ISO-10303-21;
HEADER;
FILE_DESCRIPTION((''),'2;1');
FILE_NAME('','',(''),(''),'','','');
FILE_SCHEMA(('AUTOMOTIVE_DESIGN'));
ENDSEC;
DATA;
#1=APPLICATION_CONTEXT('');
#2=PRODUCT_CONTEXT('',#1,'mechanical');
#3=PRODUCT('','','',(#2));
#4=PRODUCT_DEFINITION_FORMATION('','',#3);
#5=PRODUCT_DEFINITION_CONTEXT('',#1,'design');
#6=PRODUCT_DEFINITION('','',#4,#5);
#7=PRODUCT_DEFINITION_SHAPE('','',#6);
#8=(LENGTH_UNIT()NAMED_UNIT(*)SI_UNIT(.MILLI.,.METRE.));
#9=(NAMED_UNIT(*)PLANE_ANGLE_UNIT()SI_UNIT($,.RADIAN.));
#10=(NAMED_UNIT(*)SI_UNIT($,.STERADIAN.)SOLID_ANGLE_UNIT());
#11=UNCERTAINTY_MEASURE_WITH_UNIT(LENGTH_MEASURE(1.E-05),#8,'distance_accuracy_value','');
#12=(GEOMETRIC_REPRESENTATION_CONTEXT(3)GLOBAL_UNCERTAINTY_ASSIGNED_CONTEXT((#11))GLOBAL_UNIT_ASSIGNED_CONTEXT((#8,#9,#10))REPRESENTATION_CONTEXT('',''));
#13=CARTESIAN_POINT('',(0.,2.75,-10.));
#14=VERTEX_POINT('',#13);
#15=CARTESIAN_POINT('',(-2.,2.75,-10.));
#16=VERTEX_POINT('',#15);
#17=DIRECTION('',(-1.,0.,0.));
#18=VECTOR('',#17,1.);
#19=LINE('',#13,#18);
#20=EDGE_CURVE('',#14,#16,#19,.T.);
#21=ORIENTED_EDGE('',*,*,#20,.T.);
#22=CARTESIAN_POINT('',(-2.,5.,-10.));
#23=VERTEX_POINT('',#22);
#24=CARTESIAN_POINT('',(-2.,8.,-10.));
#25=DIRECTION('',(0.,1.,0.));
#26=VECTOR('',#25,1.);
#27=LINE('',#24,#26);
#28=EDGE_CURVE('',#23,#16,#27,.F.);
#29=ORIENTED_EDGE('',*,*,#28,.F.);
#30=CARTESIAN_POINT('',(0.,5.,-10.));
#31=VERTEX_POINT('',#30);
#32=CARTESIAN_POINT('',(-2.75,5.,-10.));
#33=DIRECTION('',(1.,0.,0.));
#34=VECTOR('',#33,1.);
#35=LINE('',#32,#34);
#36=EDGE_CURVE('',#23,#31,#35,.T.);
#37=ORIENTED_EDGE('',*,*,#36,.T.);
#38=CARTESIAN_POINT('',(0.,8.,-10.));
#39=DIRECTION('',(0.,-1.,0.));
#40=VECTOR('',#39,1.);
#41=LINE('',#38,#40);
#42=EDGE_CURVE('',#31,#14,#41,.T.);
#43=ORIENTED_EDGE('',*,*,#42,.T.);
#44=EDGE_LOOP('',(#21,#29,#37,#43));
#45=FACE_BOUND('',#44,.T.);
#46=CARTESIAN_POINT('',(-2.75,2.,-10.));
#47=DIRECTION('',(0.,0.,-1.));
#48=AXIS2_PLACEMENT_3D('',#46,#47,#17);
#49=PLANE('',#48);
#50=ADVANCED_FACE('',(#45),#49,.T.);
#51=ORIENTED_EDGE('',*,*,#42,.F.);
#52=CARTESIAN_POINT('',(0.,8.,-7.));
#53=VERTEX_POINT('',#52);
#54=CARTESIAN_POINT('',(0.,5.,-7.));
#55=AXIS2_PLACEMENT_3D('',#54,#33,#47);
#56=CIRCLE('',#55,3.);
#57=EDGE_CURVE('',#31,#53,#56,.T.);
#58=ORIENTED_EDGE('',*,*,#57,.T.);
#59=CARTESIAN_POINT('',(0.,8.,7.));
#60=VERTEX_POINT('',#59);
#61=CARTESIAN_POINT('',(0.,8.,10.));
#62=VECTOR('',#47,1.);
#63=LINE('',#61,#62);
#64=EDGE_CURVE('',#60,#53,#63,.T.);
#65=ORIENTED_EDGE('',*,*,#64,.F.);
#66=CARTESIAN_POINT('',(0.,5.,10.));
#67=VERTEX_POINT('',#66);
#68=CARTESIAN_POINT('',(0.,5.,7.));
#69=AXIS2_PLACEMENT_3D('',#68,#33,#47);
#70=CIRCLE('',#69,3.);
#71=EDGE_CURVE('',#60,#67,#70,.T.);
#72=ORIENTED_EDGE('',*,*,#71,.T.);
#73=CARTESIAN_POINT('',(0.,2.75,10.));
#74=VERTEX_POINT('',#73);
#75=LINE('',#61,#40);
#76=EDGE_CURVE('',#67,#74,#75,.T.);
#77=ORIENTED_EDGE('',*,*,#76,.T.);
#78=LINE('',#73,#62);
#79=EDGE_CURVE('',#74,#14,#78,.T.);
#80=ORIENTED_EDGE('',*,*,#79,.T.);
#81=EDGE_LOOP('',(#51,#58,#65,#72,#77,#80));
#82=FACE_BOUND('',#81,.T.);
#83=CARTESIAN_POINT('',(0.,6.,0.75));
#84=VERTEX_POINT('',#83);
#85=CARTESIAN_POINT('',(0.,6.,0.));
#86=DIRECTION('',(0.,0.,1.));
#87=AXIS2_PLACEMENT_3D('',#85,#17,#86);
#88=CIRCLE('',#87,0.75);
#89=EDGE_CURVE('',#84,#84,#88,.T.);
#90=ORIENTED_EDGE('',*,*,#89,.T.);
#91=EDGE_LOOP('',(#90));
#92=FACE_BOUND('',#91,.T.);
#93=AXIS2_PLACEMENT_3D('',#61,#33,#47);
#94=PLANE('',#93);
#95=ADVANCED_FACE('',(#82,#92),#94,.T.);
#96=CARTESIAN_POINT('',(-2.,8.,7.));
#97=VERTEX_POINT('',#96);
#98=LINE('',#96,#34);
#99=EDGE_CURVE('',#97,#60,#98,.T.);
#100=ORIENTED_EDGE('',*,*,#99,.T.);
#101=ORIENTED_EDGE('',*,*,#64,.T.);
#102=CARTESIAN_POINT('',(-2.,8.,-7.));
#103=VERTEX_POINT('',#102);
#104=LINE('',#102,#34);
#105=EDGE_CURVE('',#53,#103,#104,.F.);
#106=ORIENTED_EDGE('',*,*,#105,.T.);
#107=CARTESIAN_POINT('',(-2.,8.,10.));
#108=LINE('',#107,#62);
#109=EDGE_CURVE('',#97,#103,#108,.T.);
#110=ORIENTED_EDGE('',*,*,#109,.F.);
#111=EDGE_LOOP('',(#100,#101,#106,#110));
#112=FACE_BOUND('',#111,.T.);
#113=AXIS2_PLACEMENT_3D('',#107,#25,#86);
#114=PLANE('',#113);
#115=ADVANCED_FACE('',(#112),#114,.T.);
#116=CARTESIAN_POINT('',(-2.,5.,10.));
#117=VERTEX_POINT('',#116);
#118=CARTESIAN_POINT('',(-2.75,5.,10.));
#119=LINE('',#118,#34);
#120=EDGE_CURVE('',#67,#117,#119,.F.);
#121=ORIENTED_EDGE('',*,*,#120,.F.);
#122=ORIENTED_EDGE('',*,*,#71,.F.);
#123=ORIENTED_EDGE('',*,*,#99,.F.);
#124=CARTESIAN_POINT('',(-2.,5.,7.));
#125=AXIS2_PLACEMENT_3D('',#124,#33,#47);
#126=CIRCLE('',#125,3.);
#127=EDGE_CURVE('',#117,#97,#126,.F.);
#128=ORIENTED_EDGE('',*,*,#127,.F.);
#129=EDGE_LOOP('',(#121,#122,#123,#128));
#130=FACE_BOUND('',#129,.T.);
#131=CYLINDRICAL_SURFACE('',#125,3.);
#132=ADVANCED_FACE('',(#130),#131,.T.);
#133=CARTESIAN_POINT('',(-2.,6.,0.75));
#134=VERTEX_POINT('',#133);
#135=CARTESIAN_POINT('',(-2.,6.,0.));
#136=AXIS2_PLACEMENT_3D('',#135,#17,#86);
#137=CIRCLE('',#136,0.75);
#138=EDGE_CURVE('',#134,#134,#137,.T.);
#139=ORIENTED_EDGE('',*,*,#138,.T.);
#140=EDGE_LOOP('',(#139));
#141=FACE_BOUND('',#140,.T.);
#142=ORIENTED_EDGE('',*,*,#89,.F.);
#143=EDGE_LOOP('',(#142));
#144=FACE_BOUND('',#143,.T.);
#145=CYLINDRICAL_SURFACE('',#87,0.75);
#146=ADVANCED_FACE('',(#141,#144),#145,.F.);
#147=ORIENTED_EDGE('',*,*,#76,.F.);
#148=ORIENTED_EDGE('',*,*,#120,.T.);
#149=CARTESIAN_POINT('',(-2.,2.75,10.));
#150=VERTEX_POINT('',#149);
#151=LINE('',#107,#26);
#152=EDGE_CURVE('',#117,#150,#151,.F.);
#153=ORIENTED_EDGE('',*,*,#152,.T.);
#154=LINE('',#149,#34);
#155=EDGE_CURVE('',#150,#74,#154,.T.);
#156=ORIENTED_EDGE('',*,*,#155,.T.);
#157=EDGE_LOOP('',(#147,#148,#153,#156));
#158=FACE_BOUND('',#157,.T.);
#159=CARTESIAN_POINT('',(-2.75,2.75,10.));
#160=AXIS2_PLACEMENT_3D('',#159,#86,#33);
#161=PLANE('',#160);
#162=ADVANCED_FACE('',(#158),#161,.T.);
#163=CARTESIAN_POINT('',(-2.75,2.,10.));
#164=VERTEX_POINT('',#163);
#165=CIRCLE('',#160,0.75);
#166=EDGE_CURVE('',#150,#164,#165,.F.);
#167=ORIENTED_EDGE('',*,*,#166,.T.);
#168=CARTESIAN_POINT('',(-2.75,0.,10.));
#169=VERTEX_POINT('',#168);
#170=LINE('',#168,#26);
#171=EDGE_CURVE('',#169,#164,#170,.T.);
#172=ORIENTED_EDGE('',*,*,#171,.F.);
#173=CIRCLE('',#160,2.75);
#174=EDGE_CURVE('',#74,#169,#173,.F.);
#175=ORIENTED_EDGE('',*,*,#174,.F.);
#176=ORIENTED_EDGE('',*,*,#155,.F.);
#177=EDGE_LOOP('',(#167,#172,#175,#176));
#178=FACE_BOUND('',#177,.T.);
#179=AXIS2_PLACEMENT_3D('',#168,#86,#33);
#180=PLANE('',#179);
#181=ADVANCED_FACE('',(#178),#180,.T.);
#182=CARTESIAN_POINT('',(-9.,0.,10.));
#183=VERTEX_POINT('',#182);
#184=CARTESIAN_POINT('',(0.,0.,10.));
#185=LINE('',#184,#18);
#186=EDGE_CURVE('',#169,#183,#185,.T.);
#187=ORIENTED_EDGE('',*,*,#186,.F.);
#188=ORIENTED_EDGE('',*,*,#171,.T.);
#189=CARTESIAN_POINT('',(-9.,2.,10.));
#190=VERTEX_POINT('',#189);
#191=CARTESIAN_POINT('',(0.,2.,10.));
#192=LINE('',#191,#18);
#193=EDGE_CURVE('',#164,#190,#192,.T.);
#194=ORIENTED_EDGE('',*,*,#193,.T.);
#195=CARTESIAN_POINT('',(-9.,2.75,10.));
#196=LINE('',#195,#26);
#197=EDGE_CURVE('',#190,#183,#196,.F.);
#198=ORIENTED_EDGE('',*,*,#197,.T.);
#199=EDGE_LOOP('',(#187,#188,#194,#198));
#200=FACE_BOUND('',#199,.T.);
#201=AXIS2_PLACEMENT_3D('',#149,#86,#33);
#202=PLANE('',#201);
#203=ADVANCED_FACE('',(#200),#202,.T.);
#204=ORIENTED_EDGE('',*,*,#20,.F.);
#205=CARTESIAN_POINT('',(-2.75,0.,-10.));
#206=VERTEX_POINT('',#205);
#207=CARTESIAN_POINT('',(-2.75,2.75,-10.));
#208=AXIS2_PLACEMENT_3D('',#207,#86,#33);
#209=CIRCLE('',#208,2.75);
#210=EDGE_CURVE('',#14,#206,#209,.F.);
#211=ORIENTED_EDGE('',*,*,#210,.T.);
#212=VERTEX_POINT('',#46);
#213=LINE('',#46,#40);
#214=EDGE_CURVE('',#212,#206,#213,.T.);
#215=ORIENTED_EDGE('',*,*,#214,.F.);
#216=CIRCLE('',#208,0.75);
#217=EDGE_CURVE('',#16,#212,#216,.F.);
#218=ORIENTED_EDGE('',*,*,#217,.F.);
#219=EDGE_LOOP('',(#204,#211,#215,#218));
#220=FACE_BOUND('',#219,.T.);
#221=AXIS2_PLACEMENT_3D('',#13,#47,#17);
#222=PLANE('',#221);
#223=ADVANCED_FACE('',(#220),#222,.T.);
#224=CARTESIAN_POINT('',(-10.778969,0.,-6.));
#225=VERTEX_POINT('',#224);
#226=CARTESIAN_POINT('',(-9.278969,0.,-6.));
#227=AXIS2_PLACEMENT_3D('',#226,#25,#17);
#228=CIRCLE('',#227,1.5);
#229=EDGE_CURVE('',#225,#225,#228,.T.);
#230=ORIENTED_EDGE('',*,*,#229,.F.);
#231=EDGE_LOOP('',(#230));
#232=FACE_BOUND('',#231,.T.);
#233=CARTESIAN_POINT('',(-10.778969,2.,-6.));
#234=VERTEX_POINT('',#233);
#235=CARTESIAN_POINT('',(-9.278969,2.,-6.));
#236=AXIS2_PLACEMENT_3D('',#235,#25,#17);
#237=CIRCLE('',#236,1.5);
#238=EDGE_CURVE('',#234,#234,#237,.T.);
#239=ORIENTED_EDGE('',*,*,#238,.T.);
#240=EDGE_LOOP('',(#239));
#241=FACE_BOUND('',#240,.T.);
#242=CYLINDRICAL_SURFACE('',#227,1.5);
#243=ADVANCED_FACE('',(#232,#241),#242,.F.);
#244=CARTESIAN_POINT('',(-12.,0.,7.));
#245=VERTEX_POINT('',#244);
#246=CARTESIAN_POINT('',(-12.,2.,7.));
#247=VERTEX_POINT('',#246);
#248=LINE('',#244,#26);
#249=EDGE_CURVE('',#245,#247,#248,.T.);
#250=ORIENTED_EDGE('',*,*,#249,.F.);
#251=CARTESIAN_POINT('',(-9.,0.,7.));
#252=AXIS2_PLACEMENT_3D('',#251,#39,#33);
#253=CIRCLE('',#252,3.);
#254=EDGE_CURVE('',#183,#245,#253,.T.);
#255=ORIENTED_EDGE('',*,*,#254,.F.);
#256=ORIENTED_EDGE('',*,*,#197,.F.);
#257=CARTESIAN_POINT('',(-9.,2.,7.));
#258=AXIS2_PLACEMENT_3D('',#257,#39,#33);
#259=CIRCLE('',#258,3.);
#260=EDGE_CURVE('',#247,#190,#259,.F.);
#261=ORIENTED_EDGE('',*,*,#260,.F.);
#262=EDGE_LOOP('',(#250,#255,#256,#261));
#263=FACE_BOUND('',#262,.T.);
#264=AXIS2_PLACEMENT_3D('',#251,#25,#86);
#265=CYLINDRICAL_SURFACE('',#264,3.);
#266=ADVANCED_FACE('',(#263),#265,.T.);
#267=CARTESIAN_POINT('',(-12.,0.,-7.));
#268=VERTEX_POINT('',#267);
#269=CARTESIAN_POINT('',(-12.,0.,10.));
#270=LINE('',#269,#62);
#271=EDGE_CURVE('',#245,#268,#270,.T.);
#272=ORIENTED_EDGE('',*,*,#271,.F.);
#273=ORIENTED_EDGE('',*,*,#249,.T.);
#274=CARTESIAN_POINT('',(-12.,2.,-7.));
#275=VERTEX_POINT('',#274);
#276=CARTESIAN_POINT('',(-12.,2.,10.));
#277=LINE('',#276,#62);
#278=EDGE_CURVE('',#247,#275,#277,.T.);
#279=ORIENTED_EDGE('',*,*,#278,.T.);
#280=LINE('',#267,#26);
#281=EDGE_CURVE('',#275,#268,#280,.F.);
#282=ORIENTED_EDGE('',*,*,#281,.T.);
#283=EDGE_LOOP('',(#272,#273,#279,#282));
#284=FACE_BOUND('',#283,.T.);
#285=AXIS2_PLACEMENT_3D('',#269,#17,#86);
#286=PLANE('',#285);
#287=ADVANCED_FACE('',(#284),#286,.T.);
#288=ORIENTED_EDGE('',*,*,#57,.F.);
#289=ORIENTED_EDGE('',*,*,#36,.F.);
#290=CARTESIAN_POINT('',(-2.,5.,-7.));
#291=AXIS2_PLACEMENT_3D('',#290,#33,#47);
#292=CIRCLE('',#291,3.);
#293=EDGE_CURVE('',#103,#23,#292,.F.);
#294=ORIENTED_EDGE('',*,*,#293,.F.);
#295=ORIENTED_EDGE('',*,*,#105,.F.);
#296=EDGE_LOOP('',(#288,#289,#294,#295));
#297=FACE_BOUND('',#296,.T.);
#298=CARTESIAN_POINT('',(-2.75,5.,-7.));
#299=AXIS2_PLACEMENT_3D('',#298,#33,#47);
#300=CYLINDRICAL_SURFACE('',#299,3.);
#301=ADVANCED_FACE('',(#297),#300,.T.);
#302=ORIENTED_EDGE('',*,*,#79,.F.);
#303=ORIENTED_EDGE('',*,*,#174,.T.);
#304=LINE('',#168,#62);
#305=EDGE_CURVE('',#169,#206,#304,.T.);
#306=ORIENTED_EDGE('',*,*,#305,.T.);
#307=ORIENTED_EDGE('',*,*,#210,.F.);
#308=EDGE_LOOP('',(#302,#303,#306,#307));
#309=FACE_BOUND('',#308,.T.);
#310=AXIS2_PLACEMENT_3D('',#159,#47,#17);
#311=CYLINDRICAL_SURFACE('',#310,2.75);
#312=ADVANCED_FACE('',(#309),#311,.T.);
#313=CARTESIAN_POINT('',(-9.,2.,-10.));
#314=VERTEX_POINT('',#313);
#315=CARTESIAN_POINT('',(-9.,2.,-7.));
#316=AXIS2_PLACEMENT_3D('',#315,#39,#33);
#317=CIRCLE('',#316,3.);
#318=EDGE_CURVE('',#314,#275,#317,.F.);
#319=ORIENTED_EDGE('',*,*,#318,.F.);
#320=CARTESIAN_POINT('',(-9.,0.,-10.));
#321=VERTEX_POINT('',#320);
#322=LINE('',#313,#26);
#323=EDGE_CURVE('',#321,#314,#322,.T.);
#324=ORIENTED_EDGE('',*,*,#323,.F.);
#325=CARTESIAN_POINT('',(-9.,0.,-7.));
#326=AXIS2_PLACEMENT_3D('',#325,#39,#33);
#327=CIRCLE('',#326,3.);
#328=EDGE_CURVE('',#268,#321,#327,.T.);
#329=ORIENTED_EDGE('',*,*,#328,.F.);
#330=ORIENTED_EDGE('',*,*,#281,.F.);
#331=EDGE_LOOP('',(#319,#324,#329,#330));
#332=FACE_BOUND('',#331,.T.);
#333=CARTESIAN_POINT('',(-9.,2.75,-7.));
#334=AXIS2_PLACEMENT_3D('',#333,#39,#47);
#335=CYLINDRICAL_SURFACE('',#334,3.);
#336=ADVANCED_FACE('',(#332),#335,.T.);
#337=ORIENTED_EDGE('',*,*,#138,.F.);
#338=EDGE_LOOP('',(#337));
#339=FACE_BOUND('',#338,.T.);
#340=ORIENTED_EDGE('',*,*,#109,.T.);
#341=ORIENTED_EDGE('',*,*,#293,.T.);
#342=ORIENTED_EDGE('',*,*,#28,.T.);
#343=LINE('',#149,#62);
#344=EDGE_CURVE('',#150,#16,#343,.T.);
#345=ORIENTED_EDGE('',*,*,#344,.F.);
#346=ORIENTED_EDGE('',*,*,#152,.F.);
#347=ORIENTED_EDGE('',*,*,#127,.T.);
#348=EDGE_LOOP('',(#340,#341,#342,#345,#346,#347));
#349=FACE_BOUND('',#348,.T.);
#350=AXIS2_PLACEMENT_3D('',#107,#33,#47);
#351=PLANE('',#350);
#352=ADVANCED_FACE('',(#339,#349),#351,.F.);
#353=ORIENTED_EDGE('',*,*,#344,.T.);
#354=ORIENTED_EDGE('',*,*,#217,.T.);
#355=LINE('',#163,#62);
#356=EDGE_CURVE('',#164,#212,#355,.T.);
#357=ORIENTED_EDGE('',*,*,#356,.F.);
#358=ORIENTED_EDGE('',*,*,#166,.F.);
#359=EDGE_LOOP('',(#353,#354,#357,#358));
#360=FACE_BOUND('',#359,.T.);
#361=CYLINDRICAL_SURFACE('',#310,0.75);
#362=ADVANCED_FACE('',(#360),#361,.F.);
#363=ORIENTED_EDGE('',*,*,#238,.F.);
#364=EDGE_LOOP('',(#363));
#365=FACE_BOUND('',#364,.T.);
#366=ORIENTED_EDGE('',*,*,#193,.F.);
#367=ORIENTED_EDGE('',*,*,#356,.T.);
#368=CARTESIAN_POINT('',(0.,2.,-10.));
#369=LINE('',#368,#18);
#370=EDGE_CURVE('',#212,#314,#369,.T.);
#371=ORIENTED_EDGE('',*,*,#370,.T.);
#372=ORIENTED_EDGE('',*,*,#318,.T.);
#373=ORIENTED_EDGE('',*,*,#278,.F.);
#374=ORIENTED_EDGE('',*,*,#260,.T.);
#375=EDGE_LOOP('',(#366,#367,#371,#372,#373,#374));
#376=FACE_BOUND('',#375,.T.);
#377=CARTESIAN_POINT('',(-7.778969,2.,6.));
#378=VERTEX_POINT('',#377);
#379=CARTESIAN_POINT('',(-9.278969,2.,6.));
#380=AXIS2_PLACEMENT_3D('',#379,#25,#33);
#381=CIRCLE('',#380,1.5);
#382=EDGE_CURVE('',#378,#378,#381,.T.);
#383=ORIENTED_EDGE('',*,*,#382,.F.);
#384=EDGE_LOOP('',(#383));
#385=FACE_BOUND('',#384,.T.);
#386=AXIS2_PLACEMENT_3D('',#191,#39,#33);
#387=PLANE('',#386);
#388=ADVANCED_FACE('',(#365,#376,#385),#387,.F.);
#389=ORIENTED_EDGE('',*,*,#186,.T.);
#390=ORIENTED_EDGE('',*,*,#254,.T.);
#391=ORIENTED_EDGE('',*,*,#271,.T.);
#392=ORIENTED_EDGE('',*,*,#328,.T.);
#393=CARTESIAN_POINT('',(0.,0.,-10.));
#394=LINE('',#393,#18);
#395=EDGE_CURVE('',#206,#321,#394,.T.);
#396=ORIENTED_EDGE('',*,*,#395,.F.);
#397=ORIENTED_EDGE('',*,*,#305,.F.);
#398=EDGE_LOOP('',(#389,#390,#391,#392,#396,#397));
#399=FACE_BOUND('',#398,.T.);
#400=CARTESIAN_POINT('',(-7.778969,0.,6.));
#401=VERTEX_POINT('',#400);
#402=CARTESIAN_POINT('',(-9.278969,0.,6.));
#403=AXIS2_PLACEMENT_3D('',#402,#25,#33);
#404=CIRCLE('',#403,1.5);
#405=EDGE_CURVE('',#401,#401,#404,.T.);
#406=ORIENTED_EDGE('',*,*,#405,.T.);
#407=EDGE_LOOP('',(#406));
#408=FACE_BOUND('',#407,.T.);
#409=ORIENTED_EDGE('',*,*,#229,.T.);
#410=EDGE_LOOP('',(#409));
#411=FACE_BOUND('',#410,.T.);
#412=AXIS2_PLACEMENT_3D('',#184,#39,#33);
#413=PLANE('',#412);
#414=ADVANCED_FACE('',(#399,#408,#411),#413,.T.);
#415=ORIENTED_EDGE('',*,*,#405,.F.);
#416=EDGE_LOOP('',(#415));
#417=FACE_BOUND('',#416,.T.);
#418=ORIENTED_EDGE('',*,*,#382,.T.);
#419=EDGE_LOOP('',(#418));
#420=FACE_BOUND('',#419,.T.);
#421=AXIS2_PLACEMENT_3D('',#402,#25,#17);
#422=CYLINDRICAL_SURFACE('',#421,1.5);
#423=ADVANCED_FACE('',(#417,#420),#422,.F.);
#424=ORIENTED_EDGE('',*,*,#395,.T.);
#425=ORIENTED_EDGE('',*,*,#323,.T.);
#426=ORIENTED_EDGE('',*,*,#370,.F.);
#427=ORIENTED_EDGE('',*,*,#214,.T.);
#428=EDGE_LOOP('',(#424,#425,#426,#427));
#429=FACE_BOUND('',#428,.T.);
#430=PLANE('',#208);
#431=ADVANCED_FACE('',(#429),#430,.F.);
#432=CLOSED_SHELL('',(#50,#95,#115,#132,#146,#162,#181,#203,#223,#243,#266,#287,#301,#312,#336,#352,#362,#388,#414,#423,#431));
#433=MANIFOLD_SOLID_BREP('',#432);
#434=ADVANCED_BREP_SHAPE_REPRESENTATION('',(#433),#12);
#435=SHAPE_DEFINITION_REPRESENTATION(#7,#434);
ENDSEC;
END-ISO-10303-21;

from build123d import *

# Parameters (mm, degrees)
BASE_FLANGE1_DEPTH = 10
FILLET1_R          = 3
SKETCH6_R          = 1.5
CUT_EXTRUDE1_DEPTH = 17.733200531
SKETCH7_R          = 0.75
CUT_EXTRUDE2_DEPTH = 17.248076809


# Sheet-metal steps are written as plain solids
with BuildPart() as part:
    # Sketch1 → Base-Flange1 (new, symmetric)
    with BuildSketch(Plane.XY):
        with BuildLine():
            Line((0, 8), (0, 2.75))
            ThreePointArc((0, 2.75), (-0.805456352, 0.805456352), (-2.75, 0))
            Line((-2.75, 0), (-12, 0))
            Line((-12, 0), (-12, 2))
            Line((-12, 2), (-2.75, 2))
            ThreePointArc((-2.75, 2), (-2.219669914, 2.219669914), (-2, 2.75))
            Line((-2, 2.75), (-2, 8))
            Line((-2, 8), (0, 8))
        make_face()
    extrude(amount=BASE_FLANGE1_DEPTH, both=True)

    # Fillet1
    fillet1_edges = [part.edges().sort_by_distance(p)[0] for p in [
        (-1, 8, 10),
        (-12, 1, 10),
        (-1, 8, -10),
        (-12, 1, -10),
    ]]
    fillet(fillet1_edges, radius=FILLET1_R)

    # Sketch6 → Cut-Extrude1 (cut, through all)
    with BuildSketch(Plane(origin=(0, 2, 0), x_dir=(1, 0, 0), z_dir=(0, 1, 0))):
        with Locations(Location((-9.278968908, 6, 0), (0, 0, 180))):
            Circle(SKETCH6_R)
        with Locations((-9.278968908, -6)):
            Circle(SKETCH6_R)
    extrude(amount=-CUT_EXTRUDE1_DEPTH, mode=Mode.SUBTRACT)

    # Sketch7 → Cut-Extrude2 (cut, through all)
    with BuildSketch(Plane.ZY.offset(2)):
        with Locations((0, 6)):
            Circle(SKETCH7_R)
    extrude(amount=-CUT_EXTRUDE2_DEPTH, mode=Mode.SUBTRACT)


solid = part.part
